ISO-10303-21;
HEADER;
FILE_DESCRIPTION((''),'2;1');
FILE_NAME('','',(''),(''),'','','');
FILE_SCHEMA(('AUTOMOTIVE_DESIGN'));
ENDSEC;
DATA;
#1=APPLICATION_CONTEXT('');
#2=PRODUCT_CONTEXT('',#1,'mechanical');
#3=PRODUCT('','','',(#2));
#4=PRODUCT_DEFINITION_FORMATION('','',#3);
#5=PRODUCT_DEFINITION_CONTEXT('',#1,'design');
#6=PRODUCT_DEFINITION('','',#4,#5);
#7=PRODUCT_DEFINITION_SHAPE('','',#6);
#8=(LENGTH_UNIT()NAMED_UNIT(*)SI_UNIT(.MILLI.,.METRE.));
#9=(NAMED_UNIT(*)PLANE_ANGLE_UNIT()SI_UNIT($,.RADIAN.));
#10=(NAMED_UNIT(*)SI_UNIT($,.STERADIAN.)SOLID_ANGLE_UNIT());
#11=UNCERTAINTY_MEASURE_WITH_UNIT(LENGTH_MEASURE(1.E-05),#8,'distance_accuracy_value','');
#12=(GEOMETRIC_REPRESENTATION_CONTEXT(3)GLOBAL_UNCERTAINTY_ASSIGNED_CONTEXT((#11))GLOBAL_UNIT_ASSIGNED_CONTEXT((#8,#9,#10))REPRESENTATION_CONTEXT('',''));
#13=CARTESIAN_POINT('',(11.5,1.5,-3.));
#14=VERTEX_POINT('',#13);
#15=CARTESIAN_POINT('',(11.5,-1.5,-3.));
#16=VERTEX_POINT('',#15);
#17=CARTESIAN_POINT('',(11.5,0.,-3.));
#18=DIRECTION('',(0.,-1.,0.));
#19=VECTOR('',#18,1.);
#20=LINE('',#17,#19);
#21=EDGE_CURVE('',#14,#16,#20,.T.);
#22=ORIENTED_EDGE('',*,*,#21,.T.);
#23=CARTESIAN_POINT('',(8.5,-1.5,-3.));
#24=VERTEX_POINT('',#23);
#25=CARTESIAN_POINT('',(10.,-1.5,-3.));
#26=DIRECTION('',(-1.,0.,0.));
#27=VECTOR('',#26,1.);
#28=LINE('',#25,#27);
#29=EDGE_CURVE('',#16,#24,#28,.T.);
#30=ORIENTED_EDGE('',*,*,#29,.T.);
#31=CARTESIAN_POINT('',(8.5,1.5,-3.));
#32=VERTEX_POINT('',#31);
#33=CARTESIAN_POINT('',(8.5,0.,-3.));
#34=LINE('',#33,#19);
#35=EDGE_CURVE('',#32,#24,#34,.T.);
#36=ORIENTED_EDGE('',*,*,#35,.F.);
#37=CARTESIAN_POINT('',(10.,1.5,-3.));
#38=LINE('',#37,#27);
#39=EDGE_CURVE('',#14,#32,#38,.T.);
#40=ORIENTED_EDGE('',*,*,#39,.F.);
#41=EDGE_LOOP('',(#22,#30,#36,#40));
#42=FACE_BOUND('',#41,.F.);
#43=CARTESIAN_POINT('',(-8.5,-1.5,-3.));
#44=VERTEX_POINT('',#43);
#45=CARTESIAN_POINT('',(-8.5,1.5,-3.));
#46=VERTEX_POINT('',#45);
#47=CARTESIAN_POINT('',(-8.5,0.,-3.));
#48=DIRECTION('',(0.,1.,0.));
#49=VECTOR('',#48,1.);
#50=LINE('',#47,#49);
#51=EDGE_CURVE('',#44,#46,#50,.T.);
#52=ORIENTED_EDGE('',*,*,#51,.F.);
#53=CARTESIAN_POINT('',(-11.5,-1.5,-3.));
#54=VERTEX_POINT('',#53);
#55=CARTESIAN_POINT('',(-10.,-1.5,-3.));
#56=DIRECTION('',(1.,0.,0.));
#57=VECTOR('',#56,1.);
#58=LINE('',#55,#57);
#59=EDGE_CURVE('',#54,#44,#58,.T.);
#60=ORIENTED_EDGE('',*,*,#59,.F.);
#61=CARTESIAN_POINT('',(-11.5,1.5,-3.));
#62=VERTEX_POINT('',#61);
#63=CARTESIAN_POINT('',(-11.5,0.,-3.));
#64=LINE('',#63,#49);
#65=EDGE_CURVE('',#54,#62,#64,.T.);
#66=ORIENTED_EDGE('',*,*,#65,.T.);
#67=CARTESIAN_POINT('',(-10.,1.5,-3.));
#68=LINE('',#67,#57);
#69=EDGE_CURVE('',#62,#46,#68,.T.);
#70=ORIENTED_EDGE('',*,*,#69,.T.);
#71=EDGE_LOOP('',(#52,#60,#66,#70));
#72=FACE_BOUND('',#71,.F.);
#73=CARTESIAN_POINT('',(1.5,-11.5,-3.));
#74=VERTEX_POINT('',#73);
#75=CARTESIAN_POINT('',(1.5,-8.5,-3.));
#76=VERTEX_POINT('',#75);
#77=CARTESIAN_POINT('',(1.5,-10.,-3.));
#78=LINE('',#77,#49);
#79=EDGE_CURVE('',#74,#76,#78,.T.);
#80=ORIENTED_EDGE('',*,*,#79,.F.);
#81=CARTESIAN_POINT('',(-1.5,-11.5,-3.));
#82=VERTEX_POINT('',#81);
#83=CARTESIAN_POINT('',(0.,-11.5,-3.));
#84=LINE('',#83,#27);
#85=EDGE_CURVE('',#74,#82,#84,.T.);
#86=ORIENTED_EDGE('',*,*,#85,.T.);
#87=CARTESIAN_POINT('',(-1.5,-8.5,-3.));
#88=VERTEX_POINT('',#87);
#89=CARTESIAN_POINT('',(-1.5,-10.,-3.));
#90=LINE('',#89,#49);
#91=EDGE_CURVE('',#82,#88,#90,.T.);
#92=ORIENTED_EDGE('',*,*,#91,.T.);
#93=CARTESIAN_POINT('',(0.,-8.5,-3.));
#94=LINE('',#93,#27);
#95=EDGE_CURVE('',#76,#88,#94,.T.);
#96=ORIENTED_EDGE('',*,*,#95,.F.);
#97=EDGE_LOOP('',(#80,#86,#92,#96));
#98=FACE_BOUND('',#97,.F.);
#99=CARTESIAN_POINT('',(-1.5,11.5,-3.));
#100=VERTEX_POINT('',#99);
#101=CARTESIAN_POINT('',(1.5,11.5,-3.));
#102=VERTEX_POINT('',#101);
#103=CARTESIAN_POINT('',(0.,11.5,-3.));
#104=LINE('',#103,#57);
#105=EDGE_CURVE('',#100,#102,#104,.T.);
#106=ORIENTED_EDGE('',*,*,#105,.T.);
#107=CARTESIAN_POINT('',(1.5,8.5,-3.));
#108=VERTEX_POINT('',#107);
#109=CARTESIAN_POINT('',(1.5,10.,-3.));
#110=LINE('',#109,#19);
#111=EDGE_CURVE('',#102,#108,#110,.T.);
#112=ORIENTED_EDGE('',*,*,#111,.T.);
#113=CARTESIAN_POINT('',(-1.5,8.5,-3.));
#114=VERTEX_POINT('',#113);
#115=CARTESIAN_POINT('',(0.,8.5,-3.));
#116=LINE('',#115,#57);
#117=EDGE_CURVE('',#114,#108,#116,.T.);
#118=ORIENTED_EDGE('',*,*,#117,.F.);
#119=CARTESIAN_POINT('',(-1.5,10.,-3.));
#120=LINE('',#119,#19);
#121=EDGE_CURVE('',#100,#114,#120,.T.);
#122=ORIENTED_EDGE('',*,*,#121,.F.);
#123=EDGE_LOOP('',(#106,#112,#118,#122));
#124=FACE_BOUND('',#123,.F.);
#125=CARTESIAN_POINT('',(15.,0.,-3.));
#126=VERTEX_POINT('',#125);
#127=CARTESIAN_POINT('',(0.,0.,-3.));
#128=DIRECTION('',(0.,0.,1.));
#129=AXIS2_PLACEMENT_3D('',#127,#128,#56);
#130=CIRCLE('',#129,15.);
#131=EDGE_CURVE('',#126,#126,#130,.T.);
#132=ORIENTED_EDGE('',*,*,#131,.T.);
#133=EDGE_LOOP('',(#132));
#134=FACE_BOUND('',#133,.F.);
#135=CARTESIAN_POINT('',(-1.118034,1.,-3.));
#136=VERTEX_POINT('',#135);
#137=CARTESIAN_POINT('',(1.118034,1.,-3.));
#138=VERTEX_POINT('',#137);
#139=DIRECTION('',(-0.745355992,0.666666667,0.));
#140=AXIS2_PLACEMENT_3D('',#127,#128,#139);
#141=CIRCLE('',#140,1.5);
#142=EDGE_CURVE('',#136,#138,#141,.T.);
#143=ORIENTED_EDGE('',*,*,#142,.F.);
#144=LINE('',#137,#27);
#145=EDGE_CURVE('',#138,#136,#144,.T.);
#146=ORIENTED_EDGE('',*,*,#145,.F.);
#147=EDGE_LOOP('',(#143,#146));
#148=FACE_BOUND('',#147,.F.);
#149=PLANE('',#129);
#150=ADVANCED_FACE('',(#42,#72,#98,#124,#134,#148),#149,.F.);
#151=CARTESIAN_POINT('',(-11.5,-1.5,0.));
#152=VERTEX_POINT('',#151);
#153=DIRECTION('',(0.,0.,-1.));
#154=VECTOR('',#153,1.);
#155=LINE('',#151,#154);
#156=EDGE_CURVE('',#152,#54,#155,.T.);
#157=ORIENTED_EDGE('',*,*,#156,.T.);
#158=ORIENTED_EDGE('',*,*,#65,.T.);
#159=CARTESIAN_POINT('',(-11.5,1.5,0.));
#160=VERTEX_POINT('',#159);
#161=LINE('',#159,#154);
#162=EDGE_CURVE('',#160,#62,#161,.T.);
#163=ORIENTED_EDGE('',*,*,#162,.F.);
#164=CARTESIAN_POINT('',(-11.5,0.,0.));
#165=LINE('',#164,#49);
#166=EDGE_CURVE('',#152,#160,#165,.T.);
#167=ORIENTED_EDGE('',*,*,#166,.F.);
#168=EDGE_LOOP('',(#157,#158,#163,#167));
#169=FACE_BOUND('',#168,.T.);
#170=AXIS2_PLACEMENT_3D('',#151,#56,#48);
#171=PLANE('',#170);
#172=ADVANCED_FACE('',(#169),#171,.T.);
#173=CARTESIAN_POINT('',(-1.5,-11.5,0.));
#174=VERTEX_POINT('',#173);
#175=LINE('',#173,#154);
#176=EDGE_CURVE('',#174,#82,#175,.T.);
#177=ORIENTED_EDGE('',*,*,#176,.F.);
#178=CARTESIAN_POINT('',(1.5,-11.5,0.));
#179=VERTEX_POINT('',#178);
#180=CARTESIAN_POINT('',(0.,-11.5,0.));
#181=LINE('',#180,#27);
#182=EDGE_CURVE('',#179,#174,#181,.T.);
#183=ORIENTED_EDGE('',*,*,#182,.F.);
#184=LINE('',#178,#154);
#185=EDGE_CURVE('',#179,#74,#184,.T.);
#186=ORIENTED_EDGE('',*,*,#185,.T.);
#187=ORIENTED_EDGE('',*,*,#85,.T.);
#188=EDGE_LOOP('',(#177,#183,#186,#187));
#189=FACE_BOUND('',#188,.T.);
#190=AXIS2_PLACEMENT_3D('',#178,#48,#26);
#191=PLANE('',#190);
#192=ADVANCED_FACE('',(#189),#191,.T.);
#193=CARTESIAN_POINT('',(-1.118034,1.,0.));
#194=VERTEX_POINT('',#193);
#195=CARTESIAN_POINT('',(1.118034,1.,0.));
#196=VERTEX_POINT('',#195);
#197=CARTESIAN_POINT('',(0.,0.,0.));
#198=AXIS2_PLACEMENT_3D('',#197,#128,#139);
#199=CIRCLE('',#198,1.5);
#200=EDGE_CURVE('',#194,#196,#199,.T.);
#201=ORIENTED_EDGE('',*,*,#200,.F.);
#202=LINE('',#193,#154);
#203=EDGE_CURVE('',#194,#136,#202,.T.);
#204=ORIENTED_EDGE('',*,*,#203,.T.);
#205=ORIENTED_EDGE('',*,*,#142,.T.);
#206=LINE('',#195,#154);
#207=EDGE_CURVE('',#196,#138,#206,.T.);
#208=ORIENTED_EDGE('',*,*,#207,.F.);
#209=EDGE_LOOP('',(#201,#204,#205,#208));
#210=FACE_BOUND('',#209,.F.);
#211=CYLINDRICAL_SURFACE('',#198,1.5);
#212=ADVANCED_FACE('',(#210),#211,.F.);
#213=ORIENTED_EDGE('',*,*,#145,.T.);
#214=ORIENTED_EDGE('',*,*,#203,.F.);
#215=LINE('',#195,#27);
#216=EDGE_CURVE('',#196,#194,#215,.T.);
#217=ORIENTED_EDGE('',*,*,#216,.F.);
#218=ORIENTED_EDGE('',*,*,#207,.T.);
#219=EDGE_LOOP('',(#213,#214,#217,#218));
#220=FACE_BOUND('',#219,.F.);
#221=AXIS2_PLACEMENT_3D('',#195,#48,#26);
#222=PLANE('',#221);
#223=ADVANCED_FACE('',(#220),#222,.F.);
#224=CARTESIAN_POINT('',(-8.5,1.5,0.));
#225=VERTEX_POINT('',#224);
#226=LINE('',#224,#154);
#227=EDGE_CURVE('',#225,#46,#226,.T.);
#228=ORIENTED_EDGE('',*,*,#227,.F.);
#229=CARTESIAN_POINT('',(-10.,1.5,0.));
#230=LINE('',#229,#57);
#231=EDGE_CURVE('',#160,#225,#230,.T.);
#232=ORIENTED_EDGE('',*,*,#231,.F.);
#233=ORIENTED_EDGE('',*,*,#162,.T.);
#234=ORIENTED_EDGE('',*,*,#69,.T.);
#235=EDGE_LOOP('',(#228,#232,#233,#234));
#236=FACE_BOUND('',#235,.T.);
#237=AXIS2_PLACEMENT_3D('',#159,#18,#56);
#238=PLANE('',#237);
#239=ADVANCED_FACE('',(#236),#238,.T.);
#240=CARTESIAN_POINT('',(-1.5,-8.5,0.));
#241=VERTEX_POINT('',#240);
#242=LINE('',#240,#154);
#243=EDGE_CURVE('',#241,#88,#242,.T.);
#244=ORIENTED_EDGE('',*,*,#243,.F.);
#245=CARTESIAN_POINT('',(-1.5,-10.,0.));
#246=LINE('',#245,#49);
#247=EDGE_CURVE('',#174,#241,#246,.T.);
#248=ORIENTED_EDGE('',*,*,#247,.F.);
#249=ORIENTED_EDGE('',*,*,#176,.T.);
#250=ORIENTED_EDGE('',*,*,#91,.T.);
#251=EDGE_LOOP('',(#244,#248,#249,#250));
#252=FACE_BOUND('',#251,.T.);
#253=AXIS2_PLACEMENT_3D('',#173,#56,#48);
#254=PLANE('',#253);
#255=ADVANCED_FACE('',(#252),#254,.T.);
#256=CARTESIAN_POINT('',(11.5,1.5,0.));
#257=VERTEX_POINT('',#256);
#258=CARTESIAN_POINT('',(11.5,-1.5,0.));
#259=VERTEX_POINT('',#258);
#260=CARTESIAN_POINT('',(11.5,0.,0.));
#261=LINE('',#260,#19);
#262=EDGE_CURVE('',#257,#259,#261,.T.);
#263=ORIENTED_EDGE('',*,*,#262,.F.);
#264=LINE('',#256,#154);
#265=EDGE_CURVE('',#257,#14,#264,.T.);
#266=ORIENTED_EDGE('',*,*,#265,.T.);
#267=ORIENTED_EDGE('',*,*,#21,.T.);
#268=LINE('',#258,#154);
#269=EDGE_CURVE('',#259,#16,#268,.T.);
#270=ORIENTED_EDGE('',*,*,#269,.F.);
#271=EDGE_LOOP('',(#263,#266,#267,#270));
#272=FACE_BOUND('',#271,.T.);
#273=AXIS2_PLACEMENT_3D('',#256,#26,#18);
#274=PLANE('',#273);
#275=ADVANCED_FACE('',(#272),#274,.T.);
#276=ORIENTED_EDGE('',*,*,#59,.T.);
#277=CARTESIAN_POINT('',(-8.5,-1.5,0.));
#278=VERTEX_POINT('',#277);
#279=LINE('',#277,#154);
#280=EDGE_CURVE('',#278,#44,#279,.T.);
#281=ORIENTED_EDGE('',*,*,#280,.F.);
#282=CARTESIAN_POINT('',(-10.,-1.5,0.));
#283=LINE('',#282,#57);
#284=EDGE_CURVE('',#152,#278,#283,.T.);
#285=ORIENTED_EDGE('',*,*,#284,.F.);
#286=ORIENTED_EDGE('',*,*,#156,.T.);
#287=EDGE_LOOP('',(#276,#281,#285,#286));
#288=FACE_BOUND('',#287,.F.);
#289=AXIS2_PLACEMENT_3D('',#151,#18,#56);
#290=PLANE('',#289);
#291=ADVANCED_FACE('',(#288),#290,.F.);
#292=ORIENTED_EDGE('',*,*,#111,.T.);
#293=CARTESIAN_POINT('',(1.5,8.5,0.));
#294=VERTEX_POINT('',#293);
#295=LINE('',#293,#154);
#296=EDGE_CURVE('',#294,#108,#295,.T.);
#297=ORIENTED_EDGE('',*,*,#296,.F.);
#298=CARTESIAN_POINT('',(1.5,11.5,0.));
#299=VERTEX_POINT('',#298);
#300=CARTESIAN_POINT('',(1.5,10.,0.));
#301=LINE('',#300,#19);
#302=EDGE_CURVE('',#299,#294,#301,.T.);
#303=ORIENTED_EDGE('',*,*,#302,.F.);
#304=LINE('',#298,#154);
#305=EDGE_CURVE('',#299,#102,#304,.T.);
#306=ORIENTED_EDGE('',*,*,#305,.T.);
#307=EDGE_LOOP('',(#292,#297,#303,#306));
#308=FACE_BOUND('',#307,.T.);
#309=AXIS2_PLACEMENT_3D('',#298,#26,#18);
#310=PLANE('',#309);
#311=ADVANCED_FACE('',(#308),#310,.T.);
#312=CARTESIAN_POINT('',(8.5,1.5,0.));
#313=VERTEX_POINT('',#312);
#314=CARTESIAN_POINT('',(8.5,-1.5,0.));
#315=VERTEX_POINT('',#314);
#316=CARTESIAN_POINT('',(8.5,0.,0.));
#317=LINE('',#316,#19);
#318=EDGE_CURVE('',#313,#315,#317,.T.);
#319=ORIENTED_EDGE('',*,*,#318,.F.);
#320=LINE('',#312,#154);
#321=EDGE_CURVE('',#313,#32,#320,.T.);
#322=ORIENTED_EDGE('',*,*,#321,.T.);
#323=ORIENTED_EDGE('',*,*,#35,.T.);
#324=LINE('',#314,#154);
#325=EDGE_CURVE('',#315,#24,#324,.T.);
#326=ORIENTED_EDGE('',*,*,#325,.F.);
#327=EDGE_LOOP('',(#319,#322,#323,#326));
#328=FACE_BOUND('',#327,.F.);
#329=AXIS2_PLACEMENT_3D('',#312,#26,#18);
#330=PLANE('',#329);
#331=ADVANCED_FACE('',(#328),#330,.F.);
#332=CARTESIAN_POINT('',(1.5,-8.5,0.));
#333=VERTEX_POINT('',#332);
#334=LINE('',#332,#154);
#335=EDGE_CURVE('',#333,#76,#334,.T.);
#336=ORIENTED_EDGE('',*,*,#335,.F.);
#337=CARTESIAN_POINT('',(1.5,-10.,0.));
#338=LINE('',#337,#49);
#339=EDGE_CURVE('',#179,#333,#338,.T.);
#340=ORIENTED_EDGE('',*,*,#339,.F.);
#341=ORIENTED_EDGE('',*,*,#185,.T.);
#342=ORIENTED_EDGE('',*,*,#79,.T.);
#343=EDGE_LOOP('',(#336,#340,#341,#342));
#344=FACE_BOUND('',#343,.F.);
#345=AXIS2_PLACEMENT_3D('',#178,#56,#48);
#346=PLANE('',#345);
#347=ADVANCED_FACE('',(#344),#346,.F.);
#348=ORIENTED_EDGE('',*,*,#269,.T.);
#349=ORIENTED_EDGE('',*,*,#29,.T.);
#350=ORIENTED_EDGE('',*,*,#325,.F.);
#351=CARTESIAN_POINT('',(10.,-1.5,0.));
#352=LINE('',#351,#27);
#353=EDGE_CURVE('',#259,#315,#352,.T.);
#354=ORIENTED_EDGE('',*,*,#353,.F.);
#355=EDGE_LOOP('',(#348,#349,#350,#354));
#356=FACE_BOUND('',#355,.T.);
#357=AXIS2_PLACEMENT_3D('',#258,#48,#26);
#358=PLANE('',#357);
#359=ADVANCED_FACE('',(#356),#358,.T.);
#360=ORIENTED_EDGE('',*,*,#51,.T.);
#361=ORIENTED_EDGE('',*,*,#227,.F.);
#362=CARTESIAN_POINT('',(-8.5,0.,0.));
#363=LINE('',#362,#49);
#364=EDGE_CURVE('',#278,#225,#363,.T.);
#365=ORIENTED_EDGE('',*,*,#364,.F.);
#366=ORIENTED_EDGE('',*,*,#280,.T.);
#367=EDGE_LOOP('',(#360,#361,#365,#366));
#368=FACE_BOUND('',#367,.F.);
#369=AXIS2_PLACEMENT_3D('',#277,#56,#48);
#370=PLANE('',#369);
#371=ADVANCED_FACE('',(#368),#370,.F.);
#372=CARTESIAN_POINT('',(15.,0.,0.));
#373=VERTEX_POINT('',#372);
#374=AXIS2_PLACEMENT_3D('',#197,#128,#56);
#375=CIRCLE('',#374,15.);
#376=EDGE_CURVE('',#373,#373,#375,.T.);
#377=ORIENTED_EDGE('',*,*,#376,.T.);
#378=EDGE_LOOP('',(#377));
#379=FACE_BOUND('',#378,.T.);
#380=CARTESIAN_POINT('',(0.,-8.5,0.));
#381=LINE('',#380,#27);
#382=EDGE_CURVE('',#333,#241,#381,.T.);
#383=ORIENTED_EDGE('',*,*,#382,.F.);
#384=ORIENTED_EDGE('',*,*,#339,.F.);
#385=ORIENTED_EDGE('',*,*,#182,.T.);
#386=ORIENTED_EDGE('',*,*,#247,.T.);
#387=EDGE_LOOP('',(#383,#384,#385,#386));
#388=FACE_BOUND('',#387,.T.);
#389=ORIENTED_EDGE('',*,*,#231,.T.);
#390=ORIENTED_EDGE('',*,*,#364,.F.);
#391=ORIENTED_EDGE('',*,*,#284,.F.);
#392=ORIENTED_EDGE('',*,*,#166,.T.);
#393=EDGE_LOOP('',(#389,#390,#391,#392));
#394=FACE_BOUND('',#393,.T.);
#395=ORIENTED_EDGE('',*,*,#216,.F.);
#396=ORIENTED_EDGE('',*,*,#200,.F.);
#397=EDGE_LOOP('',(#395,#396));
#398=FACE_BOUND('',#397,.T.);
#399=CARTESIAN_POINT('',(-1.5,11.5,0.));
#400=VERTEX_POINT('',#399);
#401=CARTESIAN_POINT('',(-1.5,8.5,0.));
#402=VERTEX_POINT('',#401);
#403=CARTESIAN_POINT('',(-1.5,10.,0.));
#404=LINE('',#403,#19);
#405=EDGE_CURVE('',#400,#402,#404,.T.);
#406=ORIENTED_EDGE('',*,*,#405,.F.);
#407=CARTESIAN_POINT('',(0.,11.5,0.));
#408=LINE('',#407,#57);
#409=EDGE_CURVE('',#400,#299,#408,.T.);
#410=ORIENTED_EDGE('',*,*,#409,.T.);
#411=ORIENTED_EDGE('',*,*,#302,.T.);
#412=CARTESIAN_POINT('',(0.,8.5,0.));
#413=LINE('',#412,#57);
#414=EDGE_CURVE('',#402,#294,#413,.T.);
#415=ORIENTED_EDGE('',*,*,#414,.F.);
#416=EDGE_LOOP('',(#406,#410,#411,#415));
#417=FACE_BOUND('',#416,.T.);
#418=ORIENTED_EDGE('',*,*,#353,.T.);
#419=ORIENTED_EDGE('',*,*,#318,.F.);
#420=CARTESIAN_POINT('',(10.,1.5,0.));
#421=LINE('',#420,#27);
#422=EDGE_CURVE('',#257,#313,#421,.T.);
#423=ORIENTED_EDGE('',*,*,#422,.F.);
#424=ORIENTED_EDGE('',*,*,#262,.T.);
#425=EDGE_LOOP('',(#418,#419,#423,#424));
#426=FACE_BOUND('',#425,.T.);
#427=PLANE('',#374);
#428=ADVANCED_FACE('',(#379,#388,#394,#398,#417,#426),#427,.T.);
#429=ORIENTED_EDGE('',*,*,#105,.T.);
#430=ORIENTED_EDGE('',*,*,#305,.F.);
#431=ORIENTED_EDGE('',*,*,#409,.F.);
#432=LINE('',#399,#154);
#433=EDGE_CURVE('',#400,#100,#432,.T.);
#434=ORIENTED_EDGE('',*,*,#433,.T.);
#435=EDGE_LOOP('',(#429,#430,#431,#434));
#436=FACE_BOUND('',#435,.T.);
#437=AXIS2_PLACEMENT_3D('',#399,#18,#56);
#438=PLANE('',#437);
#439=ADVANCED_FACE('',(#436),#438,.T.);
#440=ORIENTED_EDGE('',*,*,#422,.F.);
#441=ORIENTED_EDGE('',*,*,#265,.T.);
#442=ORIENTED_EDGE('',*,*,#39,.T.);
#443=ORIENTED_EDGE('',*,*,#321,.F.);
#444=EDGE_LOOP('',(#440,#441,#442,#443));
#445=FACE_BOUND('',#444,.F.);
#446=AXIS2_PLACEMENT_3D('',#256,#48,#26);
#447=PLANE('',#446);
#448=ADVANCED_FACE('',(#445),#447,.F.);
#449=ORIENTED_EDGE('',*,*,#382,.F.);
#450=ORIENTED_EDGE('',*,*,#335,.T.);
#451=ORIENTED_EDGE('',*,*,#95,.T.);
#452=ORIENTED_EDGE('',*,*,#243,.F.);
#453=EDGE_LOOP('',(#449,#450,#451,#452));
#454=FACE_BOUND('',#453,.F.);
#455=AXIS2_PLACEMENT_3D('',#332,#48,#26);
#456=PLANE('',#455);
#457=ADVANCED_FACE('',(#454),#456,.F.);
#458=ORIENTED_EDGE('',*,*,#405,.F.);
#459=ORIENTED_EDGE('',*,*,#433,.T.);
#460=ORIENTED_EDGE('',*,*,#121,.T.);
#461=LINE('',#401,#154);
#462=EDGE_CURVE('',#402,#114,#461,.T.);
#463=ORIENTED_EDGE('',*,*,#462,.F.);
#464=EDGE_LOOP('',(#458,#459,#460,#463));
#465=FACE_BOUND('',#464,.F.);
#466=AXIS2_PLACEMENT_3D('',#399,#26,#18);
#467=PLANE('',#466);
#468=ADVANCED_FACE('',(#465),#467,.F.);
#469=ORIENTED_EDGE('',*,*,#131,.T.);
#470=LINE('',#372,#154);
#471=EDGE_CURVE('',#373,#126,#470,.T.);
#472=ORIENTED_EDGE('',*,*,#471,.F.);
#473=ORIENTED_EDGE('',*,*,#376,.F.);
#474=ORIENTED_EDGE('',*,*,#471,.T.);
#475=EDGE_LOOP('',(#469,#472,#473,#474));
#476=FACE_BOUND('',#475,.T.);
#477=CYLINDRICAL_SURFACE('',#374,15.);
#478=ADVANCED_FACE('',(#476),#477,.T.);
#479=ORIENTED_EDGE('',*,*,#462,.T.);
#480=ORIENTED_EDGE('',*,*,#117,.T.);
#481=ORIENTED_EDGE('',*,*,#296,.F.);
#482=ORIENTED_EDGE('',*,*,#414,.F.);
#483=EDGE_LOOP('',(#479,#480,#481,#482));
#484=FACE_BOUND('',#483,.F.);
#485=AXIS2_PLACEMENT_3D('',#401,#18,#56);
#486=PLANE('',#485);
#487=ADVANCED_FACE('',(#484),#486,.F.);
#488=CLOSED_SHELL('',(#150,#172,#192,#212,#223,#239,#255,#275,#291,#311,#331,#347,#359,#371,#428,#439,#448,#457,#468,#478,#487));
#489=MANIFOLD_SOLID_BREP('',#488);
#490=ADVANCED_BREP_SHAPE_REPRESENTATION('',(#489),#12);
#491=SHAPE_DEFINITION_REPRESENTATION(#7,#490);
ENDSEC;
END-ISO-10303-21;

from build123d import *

# Parameters (mm, degrees)
F1_R            = 15
F2_DEPTH        = 3
F3_W            = 3
F3_H            = 3
F4_DEPTH        = 3
F4_COPIES_COUNT = 4
F6_DEPTH        = 3


# Not quite as in the source:
# - a pattern or mirror of a feature is missing from the dataset's text; its kind, count and spacing are read off the source's solid


with BuildPart() as f2:
    # F1 (on Top) → F2 (new body)
    with BuildSketch(Plane.XY):
        Circle(F1_R)
    extrude(amount=-F2_DEPTH)

    # F3 (on face) → F4 (cut, through all)
    with BuildSketch(Plane.XY):
        with Locations((-10, 0)):
            Rectangle(F3_W, F3_H)
    f4 = extrude(amount=-F4_DEPTH, mode=Mode.SUBTRACT)

    # F4_copies: F4 ×4 about axis
    f4_copies_axis = Axis((0, 0, 0), (0, 0, 1))
    for i in range(1, F4_COPIES_COUNT):
        add(f4.rotate(f4_copies_axis, i * 360 / F4_COPIES_COUNT), mode=Mode.SUBTRACT)

    # F5 (on face) → F6 (cut, through all)
    with BuildSketch(Plane.XY):
        with BuildLine():
            Line((1.1180339887, 1), (-1.1180339887, 1))
            ThreePointArc((-1.1180339887, 1), (0, -1.5), (1.1180339887, 1))
        make_face()
    extrude(amount=-F6_DEPTH, mode=Mode.SUBTRACT)


solid = f2.part
